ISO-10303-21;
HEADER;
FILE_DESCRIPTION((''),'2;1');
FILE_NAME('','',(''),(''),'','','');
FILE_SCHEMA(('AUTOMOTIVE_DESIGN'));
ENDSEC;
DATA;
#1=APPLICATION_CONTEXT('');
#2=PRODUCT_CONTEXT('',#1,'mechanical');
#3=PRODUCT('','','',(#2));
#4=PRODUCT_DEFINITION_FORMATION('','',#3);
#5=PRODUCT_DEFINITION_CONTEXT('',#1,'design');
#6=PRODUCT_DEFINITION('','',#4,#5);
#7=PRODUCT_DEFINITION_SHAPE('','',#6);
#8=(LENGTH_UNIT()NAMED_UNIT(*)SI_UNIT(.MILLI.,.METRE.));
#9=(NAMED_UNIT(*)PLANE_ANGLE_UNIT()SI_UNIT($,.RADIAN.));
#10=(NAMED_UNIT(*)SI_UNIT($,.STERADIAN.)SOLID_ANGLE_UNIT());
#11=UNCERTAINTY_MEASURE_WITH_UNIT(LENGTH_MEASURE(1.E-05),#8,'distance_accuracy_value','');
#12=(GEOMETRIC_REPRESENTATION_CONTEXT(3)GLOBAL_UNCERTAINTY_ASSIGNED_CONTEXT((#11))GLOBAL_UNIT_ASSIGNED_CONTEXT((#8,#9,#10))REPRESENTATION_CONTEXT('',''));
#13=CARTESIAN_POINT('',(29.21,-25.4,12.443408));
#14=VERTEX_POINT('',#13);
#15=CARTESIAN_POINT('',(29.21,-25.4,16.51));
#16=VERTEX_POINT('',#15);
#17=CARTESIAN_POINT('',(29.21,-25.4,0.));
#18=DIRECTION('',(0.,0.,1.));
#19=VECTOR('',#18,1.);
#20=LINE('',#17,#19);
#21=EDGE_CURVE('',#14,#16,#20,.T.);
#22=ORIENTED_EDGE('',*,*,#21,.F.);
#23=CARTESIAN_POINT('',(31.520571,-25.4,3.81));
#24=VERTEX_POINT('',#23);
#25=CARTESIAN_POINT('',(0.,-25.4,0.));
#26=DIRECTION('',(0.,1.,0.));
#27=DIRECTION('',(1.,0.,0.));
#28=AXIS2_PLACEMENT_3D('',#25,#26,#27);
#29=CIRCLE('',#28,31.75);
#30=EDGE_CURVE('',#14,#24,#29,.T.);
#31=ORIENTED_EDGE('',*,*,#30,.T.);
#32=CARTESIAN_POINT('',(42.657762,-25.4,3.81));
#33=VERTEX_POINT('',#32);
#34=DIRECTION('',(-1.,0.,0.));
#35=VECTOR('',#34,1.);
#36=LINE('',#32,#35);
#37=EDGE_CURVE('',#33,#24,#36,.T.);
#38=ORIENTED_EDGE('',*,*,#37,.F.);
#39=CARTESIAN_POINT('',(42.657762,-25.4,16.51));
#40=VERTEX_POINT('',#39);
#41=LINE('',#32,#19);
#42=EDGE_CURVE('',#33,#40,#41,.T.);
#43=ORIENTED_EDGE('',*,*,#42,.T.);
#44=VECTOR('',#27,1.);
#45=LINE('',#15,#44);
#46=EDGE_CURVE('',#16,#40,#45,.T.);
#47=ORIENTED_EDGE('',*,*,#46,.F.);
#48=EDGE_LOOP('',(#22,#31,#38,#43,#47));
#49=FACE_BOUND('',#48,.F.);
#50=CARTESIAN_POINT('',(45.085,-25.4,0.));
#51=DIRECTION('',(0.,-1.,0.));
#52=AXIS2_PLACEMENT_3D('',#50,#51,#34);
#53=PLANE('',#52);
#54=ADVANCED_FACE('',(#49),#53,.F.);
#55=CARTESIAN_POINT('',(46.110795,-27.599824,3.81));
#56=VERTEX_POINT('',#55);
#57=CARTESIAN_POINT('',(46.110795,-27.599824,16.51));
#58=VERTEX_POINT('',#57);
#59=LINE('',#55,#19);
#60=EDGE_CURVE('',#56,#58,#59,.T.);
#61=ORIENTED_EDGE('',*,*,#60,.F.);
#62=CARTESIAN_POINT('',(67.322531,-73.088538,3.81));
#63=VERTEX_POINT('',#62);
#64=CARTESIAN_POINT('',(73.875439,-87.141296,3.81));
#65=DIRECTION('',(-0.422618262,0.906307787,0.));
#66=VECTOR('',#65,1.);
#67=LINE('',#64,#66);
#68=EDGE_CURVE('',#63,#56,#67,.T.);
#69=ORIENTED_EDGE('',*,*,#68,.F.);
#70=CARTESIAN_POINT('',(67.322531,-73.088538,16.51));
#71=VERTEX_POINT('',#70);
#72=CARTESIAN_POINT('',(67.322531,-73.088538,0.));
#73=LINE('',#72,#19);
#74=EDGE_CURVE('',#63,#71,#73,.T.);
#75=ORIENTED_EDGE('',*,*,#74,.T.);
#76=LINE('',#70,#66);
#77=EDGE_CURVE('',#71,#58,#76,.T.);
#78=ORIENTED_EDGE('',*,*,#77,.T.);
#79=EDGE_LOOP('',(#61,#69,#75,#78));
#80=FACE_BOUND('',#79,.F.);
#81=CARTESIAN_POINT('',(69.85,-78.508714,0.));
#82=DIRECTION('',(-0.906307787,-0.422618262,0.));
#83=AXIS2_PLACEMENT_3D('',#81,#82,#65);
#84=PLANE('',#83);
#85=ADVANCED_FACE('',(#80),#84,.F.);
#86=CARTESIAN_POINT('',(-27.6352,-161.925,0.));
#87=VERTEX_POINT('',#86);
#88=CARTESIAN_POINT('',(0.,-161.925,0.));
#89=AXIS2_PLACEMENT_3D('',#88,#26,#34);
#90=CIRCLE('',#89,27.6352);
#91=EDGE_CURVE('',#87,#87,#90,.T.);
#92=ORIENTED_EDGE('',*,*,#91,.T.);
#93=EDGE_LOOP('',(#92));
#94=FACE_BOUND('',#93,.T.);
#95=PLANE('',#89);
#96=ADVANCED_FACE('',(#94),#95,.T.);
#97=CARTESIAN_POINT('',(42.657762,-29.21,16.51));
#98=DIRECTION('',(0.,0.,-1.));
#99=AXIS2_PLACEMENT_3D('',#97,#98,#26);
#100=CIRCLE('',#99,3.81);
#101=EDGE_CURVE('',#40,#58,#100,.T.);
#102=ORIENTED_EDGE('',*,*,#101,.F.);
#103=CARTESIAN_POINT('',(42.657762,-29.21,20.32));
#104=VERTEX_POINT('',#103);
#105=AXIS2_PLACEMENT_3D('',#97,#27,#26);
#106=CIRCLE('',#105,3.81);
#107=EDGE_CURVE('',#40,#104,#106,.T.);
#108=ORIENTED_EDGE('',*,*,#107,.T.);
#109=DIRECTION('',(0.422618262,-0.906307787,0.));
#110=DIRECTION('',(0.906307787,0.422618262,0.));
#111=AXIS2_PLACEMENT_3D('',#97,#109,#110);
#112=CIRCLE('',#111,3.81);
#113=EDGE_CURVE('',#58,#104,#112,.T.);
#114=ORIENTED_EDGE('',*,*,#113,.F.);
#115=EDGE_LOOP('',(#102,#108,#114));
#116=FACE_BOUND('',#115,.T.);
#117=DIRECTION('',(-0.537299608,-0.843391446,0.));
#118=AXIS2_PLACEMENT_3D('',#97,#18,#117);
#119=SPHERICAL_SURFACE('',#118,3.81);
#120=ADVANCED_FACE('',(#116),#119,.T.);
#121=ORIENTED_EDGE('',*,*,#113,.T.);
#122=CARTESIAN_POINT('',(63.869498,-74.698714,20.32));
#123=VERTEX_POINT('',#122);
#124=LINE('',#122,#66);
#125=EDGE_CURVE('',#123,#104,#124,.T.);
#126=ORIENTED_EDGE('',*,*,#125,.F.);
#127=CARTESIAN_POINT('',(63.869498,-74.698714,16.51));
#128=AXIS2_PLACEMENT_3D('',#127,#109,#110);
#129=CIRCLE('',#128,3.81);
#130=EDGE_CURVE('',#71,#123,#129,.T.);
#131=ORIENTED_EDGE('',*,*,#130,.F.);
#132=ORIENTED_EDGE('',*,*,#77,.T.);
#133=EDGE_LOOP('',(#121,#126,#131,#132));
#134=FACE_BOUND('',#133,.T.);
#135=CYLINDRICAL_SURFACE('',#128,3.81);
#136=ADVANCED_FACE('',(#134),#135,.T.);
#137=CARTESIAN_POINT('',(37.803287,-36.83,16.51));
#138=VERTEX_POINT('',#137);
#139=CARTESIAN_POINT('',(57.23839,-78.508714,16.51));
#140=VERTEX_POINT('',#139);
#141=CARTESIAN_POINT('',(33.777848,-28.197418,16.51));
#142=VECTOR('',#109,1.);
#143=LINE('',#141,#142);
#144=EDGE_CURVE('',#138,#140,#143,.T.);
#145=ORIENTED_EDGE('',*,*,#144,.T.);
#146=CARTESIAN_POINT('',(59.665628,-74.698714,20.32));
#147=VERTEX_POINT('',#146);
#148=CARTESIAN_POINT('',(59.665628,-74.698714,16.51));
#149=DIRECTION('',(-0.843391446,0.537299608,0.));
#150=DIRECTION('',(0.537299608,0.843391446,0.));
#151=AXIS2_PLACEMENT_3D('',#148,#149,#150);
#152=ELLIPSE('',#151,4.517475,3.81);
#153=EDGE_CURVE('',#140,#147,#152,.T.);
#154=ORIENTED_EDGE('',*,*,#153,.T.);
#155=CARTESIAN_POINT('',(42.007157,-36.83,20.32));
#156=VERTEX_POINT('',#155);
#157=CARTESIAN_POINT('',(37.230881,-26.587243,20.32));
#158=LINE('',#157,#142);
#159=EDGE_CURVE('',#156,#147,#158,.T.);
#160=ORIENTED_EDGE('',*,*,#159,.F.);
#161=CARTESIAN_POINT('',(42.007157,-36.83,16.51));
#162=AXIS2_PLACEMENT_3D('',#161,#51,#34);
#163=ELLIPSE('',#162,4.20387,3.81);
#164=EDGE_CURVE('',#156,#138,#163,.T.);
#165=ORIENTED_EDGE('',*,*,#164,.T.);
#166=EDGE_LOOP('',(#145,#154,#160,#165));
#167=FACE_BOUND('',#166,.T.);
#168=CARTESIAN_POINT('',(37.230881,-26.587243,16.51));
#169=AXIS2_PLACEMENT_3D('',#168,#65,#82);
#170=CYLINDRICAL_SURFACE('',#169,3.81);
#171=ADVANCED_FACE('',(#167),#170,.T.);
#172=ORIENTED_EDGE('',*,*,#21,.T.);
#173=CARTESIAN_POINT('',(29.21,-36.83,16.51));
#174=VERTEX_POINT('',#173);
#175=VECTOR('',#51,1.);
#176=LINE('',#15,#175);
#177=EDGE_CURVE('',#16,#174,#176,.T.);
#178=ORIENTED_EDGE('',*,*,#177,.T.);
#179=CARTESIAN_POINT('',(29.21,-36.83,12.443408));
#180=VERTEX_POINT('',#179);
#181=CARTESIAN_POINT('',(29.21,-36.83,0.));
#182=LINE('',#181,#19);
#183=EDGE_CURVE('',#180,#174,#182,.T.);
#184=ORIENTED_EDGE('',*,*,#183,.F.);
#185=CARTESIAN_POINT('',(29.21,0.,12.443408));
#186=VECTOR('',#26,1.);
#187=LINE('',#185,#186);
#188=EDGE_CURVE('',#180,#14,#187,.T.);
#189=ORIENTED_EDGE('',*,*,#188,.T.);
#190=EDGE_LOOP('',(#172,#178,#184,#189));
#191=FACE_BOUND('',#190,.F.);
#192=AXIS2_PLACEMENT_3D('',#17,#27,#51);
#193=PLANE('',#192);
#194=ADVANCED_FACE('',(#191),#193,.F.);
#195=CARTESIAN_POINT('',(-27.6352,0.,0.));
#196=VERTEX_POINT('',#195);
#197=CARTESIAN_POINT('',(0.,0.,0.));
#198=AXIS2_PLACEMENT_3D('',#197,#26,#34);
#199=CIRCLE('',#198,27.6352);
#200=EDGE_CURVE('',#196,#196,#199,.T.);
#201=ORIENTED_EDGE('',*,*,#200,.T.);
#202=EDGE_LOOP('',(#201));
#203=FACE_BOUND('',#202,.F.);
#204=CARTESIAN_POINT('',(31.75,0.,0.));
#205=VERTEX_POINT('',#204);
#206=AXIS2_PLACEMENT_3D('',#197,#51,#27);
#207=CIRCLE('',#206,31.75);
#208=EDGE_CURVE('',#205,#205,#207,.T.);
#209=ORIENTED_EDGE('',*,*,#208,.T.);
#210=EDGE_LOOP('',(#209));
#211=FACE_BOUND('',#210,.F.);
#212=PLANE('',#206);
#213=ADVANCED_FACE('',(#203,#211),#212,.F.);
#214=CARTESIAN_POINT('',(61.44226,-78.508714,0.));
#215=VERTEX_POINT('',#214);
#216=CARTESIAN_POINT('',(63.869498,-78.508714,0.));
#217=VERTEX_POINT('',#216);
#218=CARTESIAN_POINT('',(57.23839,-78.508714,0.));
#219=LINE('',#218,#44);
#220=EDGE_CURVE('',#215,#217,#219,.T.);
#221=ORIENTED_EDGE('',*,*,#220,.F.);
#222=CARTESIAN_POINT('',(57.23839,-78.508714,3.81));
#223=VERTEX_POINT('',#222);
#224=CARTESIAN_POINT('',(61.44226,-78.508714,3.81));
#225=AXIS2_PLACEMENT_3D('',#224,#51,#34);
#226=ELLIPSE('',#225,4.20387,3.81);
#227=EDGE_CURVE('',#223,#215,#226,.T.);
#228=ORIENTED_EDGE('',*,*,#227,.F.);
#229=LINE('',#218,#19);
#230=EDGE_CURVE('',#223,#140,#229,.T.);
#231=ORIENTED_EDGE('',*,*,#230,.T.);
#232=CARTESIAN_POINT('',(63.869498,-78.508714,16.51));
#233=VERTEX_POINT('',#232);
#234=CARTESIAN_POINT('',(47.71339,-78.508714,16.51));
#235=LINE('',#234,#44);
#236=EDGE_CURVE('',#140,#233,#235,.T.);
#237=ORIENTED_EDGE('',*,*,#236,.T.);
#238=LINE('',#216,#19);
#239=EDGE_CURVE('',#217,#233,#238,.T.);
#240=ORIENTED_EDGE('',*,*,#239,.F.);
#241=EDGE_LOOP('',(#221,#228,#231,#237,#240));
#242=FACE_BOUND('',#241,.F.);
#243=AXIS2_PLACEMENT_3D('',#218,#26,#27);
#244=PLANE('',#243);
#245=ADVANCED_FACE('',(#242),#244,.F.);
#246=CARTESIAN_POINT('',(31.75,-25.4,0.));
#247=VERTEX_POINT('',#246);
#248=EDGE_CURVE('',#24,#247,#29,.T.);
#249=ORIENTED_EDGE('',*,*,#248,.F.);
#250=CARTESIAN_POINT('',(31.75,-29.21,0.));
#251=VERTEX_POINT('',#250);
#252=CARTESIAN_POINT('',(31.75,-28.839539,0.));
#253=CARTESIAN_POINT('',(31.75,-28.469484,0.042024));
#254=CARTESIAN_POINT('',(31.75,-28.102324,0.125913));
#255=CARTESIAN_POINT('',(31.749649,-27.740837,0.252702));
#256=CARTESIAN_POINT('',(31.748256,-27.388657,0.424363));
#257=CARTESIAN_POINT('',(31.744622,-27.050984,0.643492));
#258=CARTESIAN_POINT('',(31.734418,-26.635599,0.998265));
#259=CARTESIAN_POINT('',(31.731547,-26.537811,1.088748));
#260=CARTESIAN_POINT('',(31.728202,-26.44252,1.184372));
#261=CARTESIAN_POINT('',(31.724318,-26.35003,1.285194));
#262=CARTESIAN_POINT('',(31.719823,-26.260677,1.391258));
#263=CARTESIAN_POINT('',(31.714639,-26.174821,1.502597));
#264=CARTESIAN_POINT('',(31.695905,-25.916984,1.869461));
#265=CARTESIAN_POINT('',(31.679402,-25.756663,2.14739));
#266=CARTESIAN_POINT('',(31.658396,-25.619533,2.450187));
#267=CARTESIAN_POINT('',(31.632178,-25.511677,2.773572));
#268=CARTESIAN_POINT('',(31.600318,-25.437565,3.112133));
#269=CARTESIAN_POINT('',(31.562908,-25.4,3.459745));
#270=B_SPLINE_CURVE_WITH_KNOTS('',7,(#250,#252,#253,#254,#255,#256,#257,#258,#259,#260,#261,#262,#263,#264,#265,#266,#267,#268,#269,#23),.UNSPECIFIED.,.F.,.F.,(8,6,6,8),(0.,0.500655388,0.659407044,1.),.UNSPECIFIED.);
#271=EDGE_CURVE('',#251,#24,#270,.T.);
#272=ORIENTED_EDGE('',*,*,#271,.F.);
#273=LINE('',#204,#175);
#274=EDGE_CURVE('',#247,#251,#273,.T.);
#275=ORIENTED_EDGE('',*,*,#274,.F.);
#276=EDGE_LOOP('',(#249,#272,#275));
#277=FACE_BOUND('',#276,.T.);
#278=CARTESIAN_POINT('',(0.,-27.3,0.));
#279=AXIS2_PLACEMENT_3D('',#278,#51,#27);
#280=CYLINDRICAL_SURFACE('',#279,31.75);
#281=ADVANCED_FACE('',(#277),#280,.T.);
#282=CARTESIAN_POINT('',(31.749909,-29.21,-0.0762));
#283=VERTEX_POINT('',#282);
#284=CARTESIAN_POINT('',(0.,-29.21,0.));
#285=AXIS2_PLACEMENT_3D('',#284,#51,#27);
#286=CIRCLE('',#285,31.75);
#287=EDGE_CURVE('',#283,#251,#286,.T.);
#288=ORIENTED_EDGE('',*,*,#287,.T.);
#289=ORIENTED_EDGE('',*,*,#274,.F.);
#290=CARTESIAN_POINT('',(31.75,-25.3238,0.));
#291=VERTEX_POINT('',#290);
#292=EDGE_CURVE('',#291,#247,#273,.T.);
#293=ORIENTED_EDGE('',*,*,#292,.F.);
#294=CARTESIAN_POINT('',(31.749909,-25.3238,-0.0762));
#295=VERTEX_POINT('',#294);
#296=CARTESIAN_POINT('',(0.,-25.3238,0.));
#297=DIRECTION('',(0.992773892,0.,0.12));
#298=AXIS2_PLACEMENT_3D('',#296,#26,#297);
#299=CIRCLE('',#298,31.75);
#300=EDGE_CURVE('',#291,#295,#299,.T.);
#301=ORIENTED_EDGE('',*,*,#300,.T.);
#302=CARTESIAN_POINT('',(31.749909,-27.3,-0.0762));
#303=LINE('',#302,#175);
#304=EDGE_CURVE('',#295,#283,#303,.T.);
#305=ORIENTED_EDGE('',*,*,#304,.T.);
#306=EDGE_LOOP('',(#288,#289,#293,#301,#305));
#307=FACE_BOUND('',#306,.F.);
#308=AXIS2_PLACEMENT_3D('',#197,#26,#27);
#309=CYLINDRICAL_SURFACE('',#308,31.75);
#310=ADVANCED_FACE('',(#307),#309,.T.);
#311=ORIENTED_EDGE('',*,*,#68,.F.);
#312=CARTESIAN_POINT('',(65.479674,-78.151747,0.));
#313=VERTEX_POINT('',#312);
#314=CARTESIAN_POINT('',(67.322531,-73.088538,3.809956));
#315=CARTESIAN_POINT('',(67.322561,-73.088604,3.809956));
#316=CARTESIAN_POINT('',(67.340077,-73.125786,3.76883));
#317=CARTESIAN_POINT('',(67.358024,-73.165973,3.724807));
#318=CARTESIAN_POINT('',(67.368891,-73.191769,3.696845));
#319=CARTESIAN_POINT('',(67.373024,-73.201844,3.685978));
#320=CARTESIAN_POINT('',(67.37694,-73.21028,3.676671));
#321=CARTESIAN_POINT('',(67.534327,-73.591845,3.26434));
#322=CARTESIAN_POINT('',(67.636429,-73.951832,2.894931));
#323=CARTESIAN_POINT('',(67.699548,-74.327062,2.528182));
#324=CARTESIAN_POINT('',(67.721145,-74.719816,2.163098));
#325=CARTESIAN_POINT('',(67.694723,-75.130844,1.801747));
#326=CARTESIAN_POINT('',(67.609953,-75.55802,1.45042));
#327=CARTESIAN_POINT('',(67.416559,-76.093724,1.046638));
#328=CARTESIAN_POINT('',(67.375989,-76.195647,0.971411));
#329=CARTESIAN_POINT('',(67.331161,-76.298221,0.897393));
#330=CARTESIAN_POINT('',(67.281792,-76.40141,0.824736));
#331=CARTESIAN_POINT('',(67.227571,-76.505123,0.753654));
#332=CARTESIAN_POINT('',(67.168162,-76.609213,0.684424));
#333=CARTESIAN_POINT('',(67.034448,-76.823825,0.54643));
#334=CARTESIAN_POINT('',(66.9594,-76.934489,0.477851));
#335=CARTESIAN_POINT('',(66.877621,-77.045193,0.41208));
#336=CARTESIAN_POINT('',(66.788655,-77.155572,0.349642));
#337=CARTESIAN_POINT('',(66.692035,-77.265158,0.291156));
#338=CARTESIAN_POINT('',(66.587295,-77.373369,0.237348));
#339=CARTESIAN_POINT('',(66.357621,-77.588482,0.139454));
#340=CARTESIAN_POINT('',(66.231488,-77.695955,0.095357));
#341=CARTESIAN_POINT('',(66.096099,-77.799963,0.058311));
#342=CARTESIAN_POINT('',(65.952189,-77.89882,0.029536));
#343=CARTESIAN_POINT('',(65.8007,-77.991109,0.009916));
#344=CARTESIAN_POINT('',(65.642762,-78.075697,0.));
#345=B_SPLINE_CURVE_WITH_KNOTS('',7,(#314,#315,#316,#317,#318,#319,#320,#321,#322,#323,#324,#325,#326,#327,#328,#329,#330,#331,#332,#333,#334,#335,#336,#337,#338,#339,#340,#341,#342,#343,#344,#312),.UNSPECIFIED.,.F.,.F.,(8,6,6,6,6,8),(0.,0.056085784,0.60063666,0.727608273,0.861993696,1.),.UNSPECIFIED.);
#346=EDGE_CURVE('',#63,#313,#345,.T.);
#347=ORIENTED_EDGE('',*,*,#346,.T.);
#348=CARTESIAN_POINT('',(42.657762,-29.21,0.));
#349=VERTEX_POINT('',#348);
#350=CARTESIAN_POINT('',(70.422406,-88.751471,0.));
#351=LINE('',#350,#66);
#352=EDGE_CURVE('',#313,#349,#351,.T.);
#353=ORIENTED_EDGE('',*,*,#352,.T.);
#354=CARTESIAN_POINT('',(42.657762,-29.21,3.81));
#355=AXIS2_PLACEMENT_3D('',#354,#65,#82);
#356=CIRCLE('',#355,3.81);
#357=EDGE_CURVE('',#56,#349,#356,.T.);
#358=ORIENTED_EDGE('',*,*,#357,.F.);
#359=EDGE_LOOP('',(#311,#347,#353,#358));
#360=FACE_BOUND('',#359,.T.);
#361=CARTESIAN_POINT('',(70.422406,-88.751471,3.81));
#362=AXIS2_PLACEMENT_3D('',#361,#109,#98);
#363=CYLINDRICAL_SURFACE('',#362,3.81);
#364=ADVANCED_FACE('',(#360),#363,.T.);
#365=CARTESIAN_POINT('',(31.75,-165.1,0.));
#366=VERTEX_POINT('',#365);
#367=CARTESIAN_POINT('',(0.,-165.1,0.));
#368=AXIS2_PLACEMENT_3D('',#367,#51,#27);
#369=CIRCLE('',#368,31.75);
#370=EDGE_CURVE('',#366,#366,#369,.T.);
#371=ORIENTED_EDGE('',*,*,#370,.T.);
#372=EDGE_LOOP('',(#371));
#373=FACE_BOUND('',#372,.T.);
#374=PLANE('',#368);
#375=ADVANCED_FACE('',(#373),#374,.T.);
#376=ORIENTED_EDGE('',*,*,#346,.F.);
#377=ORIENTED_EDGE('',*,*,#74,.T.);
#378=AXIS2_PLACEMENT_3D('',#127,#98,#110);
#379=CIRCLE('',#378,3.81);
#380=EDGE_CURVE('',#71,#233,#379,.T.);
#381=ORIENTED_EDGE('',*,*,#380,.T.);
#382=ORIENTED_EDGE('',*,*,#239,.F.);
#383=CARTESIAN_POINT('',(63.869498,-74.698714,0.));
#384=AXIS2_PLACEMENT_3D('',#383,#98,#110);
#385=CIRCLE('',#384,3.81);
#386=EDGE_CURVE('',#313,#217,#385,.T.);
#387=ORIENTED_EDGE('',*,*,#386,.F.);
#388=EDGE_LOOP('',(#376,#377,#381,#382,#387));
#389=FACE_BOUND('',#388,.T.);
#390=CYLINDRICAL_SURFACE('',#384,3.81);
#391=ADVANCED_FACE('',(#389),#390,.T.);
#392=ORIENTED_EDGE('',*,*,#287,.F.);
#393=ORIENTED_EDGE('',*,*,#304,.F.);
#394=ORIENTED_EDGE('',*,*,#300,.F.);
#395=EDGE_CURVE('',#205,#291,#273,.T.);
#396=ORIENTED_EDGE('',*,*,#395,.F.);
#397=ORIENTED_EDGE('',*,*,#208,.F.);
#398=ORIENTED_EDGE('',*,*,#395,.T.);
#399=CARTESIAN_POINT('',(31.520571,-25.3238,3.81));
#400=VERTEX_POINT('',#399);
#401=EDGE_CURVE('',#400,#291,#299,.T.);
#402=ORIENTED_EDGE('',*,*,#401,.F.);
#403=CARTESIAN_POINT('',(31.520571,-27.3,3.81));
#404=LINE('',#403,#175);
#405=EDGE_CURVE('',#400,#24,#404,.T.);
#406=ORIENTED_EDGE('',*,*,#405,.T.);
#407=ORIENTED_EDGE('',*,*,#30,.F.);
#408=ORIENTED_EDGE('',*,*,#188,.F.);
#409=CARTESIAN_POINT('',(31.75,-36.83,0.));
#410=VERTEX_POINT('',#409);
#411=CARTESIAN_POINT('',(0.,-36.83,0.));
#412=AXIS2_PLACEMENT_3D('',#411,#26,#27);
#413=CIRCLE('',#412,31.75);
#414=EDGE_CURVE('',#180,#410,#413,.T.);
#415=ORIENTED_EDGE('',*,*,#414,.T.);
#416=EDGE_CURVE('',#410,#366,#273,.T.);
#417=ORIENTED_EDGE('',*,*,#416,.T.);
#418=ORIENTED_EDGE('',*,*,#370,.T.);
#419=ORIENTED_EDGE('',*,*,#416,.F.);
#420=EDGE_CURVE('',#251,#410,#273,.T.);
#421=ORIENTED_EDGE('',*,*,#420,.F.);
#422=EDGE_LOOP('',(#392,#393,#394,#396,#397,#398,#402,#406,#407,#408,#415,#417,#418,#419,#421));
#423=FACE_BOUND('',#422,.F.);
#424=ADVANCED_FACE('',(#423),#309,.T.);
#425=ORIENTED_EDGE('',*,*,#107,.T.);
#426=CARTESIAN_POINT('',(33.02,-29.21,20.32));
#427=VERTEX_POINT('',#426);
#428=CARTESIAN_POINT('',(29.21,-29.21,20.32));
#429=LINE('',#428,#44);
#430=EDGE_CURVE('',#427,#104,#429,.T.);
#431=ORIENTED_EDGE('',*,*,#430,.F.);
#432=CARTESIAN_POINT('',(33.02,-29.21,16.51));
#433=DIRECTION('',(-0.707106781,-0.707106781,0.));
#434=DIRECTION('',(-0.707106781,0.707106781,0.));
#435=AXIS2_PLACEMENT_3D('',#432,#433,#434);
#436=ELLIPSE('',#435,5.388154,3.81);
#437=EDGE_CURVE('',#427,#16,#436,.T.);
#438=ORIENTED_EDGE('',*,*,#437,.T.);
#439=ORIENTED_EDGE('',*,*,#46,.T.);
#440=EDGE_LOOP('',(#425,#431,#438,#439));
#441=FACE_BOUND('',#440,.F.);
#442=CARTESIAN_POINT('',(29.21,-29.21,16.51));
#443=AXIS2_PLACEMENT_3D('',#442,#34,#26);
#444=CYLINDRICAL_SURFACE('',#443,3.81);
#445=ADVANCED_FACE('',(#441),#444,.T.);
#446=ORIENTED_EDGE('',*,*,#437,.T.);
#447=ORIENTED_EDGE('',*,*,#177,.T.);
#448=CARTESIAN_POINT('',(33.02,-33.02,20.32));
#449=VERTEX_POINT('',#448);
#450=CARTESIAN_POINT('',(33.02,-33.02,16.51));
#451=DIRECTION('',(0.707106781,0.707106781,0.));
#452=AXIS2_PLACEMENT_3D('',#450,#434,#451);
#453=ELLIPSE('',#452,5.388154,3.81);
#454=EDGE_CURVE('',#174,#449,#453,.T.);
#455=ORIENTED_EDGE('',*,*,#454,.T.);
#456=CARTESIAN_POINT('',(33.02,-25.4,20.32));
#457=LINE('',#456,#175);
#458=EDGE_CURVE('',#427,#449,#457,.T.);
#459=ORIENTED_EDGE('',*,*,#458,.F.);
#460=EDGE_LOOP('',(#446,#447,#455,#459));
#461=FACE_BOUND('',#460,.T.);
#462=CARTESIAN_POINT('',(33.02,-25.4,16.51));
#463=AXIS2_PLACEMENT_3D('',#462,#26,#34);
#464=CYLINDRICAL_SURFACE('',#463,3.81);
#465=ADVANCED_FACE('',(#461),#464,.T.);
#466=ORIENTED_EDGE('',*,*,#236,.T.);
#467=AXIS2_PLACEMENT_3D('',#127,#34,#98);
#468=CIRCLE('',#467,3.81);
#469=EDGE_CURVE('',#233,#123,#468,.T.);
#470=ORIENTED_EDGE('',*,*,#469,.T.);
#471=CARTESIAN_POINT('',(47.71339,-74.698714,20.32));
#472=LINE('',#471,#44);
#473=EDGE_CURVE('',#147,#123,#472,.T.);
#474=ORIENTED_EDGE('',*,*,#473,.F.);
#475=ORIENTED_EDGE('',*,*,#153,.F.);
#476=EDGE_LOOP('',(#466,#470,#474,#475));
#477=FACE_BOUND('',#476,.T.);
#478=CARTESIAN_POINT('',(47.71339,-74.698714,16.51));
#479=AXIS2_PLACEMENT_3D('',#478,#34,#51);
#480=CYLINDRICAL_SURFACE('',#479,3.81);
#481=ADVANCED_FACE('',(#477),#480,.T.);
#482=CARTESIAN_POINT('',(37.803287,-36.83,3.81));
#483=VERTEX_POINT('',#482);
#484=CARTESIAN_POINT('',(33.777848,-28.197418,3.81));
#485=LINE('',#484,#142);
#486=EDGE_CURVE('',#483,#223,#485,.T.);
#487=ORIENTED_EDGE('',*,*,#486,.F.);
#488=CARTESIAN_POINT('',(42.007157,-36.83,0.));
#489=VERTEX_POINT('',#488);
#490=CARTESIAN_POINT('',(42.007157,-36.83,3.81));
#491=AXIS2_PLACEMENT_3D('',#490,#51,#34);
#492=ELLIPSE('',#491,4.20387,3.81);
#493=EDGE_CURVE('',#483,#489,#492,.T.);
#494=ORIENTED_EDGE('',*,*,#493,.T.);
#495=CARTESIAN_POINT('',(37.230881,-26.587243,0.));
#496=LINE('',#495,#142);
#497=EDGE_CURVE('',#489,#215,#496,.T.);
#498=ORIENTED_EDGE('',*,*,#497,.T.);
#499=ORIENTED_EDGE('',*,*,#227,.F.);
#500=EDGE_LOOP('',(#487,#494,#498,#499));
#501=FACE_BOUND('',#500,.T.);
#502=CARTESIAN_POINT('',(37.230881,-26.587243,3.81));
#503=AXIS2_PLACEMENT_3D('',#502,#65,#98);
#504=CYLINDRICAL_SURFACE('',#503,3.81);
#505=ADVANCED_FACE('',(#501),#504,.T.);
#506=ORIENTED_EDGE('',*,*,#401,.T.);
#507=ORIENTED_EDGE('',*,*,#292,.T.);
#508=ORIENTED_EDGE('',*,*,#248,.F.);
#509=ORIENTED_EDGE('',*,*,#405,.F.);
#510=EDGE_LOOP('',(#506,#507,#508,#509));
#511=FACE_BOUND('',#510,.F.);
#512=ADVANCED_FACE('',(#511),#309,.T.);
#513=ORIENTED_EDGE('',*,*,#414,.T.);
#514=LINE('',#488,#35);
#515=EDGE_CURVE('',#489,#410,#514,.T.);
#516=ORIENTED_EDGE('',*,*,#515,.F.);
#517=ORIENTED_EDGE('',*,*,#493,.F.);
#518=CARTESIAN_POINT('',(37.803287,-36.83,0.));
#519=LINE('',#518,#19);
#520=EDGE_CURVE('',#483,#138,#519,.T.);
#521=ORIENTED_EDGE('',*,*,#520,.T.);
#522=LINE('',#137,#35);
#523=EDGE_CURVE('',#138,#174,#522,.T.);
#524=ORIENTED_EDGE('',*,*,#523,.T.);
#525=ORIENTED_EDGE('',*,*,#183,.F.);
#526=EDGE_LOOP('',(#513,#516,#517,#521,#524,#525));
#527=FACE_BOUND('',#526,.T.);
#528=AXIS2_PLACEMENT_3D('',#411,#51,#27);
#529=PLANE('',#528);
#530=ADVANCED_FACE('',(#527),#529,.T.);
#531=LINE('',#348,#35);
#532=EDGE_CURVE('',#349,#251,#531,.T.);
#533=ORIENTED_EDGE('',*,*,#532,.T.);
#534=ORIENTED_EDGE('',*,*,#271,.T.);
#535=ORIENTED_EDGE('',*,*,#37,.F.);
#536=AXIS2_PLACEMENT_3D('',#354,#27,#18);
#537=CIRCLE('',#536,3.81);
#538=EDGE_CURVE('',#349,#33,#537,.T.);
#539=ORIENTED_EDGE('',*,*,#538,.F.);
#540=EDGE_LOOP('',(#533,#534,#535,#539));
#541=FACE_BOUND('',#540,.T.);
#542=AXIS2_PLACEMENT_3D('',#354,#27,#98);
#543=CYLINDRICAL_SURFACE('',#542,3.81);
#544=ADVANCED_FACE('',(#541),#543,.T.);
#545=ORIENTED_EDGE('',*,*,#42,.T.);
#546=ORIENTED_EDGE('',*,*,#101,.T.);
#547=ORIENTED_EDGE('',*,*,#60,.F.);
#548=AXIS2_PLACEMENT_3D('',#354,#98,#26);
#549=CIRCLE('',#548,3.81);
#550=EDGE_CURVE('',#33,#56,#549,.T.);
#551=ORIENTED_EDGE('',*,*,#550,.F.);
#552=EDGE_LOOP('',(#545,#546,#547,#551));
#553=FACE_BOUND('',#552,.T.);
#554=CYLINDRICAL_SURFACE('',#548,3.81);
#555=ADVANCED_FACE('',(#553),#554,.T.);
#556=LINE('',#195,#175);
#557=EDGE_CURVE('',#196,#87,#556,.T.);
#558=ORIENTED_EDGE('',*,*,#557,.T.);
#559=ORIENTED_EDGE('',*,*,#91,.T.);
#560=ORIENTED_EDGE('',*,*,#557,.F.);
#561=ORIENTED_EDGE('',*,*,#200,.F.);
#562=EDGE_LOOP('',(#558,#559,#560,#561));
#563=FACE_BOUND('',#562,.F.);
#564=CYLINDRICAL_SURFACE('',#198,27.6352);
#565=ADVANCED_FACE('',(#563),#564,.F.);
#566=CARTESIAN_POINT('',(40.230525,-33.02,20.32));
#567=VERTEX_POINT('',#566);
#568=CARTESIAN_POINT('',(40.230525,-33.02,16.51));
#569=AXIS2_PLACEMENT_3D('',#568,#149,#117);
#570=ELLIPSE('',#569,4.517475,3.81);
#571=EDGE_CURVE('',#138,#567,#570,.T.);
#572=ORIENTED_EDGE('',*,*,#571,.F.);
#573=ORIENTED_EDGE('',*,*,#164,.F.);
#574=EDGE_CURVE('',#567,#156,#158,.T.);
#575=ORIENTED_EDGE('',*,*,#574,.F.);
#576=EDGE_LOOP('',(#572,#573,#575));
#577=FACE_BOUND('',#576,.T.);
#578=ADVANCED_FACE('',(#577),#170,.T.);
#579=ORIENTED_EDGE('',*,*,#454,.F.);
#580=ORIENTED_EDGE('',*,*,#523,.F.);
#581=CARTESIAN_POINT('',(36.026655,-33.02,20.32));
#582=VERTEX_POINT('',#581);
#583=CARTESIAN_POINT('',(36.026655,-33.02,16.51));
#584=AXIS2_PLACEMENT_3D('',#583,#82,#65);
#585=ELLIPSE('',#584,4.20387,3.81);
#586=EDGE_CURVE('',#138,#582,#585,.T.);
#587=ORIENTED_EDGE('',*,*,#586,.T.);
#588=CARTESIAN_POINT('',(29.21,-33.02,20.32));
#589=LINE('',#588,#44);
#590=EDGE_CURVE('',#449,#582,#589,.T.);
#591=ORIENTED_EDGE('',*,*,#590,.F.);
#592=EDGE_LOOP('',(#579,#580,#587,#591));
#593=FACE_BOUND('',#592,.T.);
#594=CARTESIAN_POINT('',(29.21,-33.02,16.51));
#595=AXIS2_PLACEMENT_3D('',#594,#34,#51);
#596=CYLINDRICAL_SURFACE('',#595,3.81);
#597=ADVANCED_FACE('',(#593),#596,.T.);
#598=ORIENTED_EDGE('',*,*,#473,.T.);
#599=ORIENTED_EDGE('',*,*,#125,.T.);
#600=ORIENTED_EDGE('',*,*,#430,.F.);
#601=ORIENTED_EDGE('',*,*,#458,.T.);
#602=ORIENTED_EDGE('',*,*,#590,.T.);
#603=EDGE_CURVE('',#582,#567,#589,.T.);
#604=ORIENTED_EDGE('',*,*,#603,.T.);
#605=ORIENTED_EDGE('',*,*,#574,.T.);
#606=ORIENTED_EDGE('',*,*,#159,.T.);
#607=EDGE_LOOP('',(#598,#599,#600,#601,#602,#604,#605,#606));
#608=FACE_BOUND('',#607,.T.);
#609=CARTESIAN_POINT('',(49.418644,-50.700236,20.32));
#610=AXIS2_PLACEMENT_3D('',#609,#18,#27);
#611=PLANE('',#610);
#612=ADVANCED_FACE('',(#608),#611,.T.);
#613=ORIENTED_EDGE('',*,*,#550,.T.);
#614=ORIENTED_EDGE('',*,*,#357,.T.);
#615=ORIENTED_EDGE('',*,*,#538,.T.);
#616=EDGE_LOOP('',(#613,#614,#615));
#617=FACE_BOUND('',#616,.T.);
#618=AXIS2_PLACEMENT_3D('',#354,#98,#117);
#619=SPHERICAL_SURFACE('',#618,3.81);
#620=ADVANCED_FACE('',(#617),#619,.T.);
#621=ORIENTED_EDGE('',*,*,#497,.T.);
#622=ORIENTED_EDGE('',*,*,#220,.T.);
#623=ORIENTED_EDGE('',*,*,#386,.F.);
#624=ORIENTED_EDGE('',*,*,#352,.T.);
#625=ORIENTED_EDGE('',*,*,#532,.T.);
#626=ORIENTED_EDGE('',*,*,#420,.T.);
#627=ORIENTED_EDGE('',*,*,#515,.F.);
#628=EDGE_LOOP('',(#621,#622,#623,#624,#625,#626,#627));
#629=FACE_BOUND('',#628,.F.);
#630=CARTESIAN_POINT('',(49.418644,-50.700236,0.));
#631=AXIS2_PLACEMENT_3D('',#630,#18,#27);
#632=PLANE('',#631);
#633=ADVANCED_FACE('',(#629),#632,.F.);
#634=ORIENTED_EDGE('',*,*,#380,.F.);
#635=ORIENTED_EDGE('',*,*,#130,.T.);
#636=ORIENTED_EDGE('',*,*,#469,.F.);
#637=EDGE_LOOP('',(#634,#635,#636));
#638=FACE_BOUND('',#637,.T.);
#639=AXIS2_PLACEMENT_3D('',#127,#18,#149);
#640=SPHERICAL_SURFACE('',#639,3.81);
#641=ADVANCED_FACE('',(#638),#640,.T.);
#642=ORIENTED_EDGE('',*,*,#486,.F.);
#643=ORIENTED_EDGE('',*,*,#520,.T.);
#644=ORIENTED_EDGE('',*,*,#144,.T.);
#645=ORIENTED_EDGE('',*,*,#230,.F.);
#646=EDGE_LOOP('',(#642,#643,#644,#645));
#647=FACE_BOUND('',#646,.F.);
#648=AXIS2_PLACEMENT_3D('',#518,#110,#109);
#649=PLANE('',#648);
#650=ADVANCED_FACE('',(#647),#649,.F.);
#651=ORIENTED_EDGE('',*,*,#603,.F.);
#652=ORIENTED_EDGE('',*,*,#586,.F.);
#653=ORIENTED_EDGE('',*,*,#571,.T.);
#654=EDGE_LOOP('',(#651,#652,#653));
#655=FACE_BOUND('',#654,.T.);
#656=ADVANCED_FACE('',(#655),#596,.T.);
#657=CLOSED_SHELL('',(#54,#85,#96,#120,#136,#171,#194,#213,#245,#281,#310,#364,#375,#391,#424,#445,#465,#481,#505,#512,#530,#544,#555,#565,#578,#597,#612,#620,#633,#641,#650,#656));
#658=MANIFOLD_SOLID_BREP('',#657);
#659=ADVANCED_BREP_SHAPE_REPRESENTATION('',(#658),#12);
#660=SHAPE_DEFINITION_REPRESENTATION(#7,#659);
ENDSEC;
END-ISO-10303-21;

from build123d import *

# Parameters (mm, degrees)
F0_R          = 31.75
F0_R_2        = 28.575
F1_DEPTH      = 165.1
F3_DEPTH      = 20.32
F4_T1_DEPTH   = 16.51
F4_T3_DEPTH   = 12.7
F4_T5_DEPTH   = 50.1912424643
F4_T7_DEPTH   = 13.4477623063
F4_T9_DEPTH   = 11.43
F4_T14_DEPTH  = 3.8862
F4_T20_DEPTH  = 3.8862
F4_T26_DEPTH  = 3.8862
F4_T32_DEPTH  = 65.6967445131
F4_T37_DEPTH  = 18.118286919
F4_T42_DEPTH  = 65.037372593
F4_T48_DEPTH  = 16.1561075649
F4_T53_DEPTH  = 65.037372593
F4_T59_DEPTH  = 20.4327623063
F4_S60_R      = 31.75
F4_T61_DEPTH  = 12
F4_T66_DEPTH  = 65.6967445131
F4_T70_DEPTH  = 31.461255122
F4_T77_DEPTH  = 20.955
F4_T81_DEPTH  = 22.9727623063
F4_T88_DEPTH  = 27.643286919
F4_T92_DEPTH  = 20.955
F4_T99_DEPTH  = 18.118286919
F4_T103_DEPTH = 65.037372593
F4_T110_DEPTH = 16.1561075649
F4_T114_DEPTH = 65.037372593
F5_R          = 27.6352
F6_DEPTH      = 161.925


# Not quite as in the source:
# - a fillet or chamfer that OpenCascade refuses, or shapes differently, is made with other operations: its cross-section is extruded or revolved along the edge and cut away or added


with BuildPart() as f1:
    # F0 (on Front) → F1 (new body)
    with BuildSketch(Plane.XZ):
        Circle(F0_R)
        Circle(F0_R_2, mode=Mode.SUBTRACT)
        Circle(F0_R_2)
    extrude(amount=F1_DEPTH)

    # F2 (on Top) → F3 (join)
    with BuildSketch(Plane.XY):
        Polygon((45.085, -25.4), (29.21, -25.4), (29.21, -36.83), (37.803286919, -36.83), (57.2383903863, -78.5087138864), (69.85, -78.5087138864), align=None)
    extrude(amount=F3_DEPTH)

    # F4: fillet of radius 3.81 on 11 edges, made by hand

    # F4_s2 → F4_t1 (cut)
    with BuildSketch(Plane.XY):
        with BuildLine():
            ThreePointArc((67.3225306198, -73.0885383092), (67.0828193597, -76.7458253942), (63.8694979512, -78.5087138864))
            Line((63.8694979512, -78.5087138864), (63.8694979512, -78.5849138864))
            Line((63.8694979512, -78.5849138864), (69.969610041, -78.5849138864))
            Line((69.969610041, -78.5849138864), (67.3915912732, -73.0563347976))
            Line((67.3915912732, -73.0563347976), (67.3225306198, -73.0885383092))
        make_face()
    extrude(amount=F4_T1_DEPTH, mode=Mode.SUBTRACT)

    # F4_s4 → F4_t3 (cut)
    with BuildSketch(Plane.XY.offset(3.81)):
        with BuildLine():
            ThreePointArc((42.6577623063, -25.4), (44.7048738141, -25.9966785915), (46.1107949749, -27.5998244228))
            Line((46.1107949749, -27.5998244228), (46.1798556283, -27.5676209112))
            Line((46.1798556283, -27.5676209112), (45.1335447539, -25.3238))
            Line((45.1335447539, -25.3238), (42.6577623063, -25.3238))
            Line((42.6577623063, -25.3238), (42.6577623063, -25.4))
        make_face()
    extrude(amount=F4_T3_DEPTH, mode=Mode.SUBTRACT)

    # F4_s6 → F4_t5 (cut)
    with BuildSketch(Plane(origin=(40.018755356, -85.8204978112, 0), x_dir=(0, 0, 1), z_dir=(-0.4226182617, 0.906307787, 0))):
        with BuildLine():
            ThreePointArc((16.51, 30.1263827303), (19.2040768363, 29.0104595667), (20.32, 26.3163827303))
            Line((20.32, 26.3163827303), (20.3962, 26.3163827303))
            Line((20.3962, 26.3163827303), (20.3962, 30.2025827303))
            Line((20.3962, 30.2025827303), (16.51, 30.2025827303))
            Line((16.51, 30.2025827303), (16.51, 30.1263827303))
        make_face()
    extrude(amount=F4_T5_DEPTH, mode=Mode.SUBTRACT)

    # F4_s8 → F4_t7 (cut)
    with BuildSketch(Plane.YZ.offset(29.21)):
        with BuildLine():
            ThreePointArc((-25.4, 16.51), (-26.5159231637, 19.2040768363), (-29.21, 20.32))
            Line((-29.21, 20.32), (-29.21, 20.3962))
            Line((-29.21, 20.3962), (-25.3238, 20.3962))
            Line((-25.3238, 20.3962), (-25.3238, 16.51))
            Line((-25.3238, 16.51), (-25.4, 16.51))
        make_face()
    extrude(amount=F4_T7_DEPTH, mode=Mode.SUBTRACT)

    # F4_s10 → F4_t9 (cut)
    with BuildSketch(Plane.XZ.offset(25.4)):
        with BuildLine():
            ThreePointArc((29.21, 16.51), (30.3259231637, 19.2040768363), (33.02, 20.32))
            Line((33.02, 20.32), (33.02, 20.3962))
            Line((33.02, 20.3962), (29.1338, 20.3962))
            Line((29.1338, 20.3962), (29.1338, 16.51))
            Line((29.1338, 16.51), (29.21, 16.51))
        make_face()
    extrude(amount=F4_T9_DEPTH, mode=Mode.SUBTRACT)


with BuildPart() as f4_tool12:
    # F4_s13 → F4_t14 (new body)
    with BuildSketch(Plane.XY.offset(16.51)):
        Polygon((63.8694979512, -74.6987138864), (67.3915912732, -73.0563347976), (69.969610041, -78.5849138864), (63.8694979512, -78.5849138864), align=None)
    extrude(amount=F4_T14_DEPTH)

    # F4_s15 → F4_t16 (revolve, cut)
    with BuildSketch(Plane(origin=(63.8694979512, -74.6987138864, 16.51), x_dir=(-0.8433914458, 0.5372996083, 0), z_dir=(0.5372996083, 0.8433914458, 0))):
        with BuildLine():
            ThreePointArc((0, -3.81), (3.81, 0), (0, 3.81))
            Line((0, 3.81), (0, -3.81))
        make_face()
    revolve(axis=Axis((63.8694979512, -74.6987138864, 16.51), (0, 0, 1)), mode=Mode.SUBTRACT)


with BuildPart() as f1_1:
    add(f1.part)

    # F4_t11: cut F4_tool12
    add(f4_tool12.part, mode=Mode.SUBTRACT)


with BuildPart() as f4_tool18:
    # F4_s19 → F4_t20 (new body)
    with BuildSketch(Plane.XY.offset(3.81)):
        Polygon((42.6577623063, -29.21), (42.6577623063, -25.3238), (45.1335447539, -25.3238), (46.1798556283, -27.5676209112), align=None)
    extrude(amount=-F4_T20_DEPTH)

    # F4_s21 → F4_t22 (revolve, cut)
    with BuildSketch(Plane(origin=(42.6577623063, -29.21, 3.81), x_dir=(-0.5372996083, -0.8433914458, 0), z_dir=(0.8433914458, -0.5372996083, 0))):
        with BuildLine():
            ThreePointArc((0, -3.81), (3.81, 0), (0, 3.81))
            Line((0, 3.81), (0, -3.81))
        make_face()
    revolve(axis=Axis((42.6577623063, -29.21, 3.81), (0, 0, -1)), mode=Mode.SUBTRACT)


with BuildPart() as f1_2:
    add(f1_1.part)

    # F4_t17: cut F4_tool18
    add(f4_tool18.part, mode=Mode.SUBTRACT)


with BuildPart() as f4_tool24:
    # F4_s25 → F4_t26 (new body)
    with BuildSketch(Plane.XY.offset(16.51)):
        Polygon((42.6577623063, -29.21), (42.6577623063, -25.3238), (45.1335447539, -25.3238), (46.1798556283, -27.5676209112), align=None)
    extrude(amount=F4_T26_DEPTH)

    # F4_s27 → F4_t28 (revolve, cut)
    with BuildSketch(Plane(origin=(42.6577623063, -29.21, 16.51), x_dir=(-0.5372996083, -0.8433914458, 0), z_dir=(-0.8433914458, 0.5372996083, 0))):
        with BuildLine():
            ThreePointArc((0, -3.81), (3.81, 0), (0, 3.81))
            Line((0, 3.81), (0, -3.81))
        make_face()
    revolve(axis=Axis((42.6577623063, -29.21, 16.51), (0, 0, 1)), mode=Mode.SUBTRACT)


with BuildPart() as f1_3:
    add(f1_2.part)

    # F4_t23: cut F4_tool24
    add(f4_tool24.part, mode=Mode.SUBTRACT)


with BuildPart() as f4_tool30:
    # F4_s31 → F4_t32 (new body)
    with BuildSketch(Plane(origin=(46.5716636793, -99.87325506, 0), x_dir=(0, 0, 1), z_dir=(-0.4226182617, 0.906307787, 0))):
        with BuildLine():
            ThreePointArc((0, 26.3163827303), (1.1159231637, 29.0104595667), (3.81, 30.1263827303))
            Line((3.81, 30.1263827303), (3.81, 30.2025827303))
            Line((3.81, 30.2025827303), (-0.0762, 30.2025827303))
            Line((-0.0762, 30.2025827303), (-0.0762, 26.3163827303))
            Line((-0.0762, 26.3163827303), (0, 26.3163827303))
        make_face()
    extrude(amount=F4_T32_DEPTH)

    split(bisect_by=Plane.XZ.offset(78.5087138864), keep=Keep.BOTTOM)


with BuildPart() as f1_4:
    add(f1_3.part)

    # F4_t29: cut F4_tool30
    add(f4_tool30.part, mode=Mode.SUBTRACT)


with BuildPart() as f4_tool35:
    # F4_s36 → F4_t37 (new body)
    with BuildSketch(Plane.YZ.offset(29.21)):
        with BuildLine():
            ThreePointArc((-36.83, 16.51), (-35.7140768363, 19.2040768363), (-33.02, 20.32))
            Line((-33.02, 20.32), (-33.02, 20.3962))
            Line((-33.02, 20.3962), (-36.9062, 20.3962))
            Line((-36.9062, 20.3962), (-36.9062, 16.51))
            Line((-36.9062, 16.51), (-36.83, 16.51))
        make_face()
    extrude(amount=F4_T37_DEPTH)

    split(bisect_by=Plane(origin=(16.9446772579, 7.9014327703, 0), x_dir=(0, 0, 1), z_dir=(-0.906307787, -0.4226182617, 0)), keep=Keep.TOP)


with BuildPart() as f1_5:
    add(f1_4.part)

    # F4_t34: cut F4_tool35
    add(f4_tool35.part, mode=Mode.SUBTRACT)


with BuildPart() as f4_tool40:
    # F4_s41 → F4_t42 (new body)
    with BuildSketch(Plane(origin=(16.833170718, -36.0988510988, 0), x_dir=(0, 0, 1), z_dir=(0.4226182617, -0.906307787, 0))):
        with BuildLine():
            ThreePointArc((16.51, -18.6963827303), (19.2040768363, -19.812305894), (20.32, -22.5063827303))
            Line((20.32, -22.5063827303), (20.3962, -22.5063827303))
            Line((20.3962, -22.5063827303), (20.3962, -18.6201827303))
            Line((20.3962, -18.6201827303), (16.51, -18.6201827303))
            Line((16.51, -18.6201827303), (16.51, -18.6963827303))
        make_face()
    extrude(amount=F4_T42_DEPTH)

    split(bisect_by=Plane.XZ.offset(36.83), keep=Keep.TOP)

    split(bisect_by=Plane.XZ.offset(78.5087138864), keep=Keep.BOTTOM)


with BuildPart() as f1_6:
    add(f1_5.part)

    # F4_t39: cut F4_tool40
    add(f4_tool40.part, mode=Mode.SUBTRACT)


with BuildPart() as f4_tool46:
    # F4_s47 → F4_t48 (new body)
    with BuildSketch(Plane.YZ.offset(47.7133903863)):
        with BuildLine():
            ThreePointArc((-78.5087138864, 16.51), (-77.3927907227, 19.2040768363), (-74.6987138864, 20.32))
            Line((-74.6987138864, 20.32), (-74.6987138864, 20.3962))
            Line((-74.6987138864, 20.3962), (-78.5849138864, 20.3962))
            Line((-78.5849138864, 20.3962), (-78.5849138864, 16.51))
            Line((-78.5849138864, 16.51), (-78.5087138864, 16.51))
        make_face()
    extrude(amount=F4_T48_DEPTH)

    split(bisect_by=Plane(origin=(16.9446772579, 7.9014327703, 0), x_dir=(0, 0, 1), z_dir=(0.906307787, 0.4226182617, 0)), keep=Keep.TOP)


with BuildPart() as f1_7:
    add(f1_6.part)

    # F4_t45: cut F4_tool46
    add(f4_tool46.part, mode=Mode.SUBTRACT)


with BuildPart() as f4_tool51:
    # F4_s52 → F4_t53 (new body)
    with BuildSketch(Plane(origin=(16.833170718, -36.0988510988, 0), x_dir=(0, 0, 1), z_dir=(0.4226182617, -0.906307787, 0))):
        with BuildLine():
            ThreePointArc((0, -22.5063827303), (1.1159231637, -19.812305894), (3.81, -18.6963827303))
            Line((3.81, -18.6963827303), (3.81, -18.6201827303))
            Line((3.81, -18.6201827303), (-0.0762, -18.6201827303))
            Line((-0.0762, -18.6201827303), (-0.0762, -22.5063827303))
            Line((-0.0762, -22.5063827303), (0, -22.5063827303))
        make_face()
    extrude(amount=F4_T53_DEPTH)

    split(bisect_by=Plane.XZ.offset(78.5087138864), keep=Keep.BOTTOM)

    split(bisect_by=Plane.XZ.offset(36.83), keep=Keep.TOP)


with BuildPart() as f1_8:
    add(f1_7.part)

    # F4_t50: cut F4_tool51
    add(f4_tool51.part, mode=Mode.SUBTRACT)


with BuildPart() as f4_tool57:
    # F4_s58 → F4_t59 (new body)
    with BuildSketch(Plane.YZ.offset(42.6577623063)):
        with BuildLine():
            ThreePointArc((-29.21, 0), (-26.5159231637, 1.1159231637), (-25.4, 3.81))
            Line((-25.4, 3.81), (-25.3238, 3.81))
            Line((-25.3238, 3.81), (-25.3238, -0.0762))
            Line((-25.3238, -0.0762), (-29.21, -0.0762))
            Line((-29.21, -0.0762), (-29.21, 0))
        make_face()
    extrude(amount=-F4_T59_DEPTH)

    # F4_s60 → F4_t61 (cut, symmetric)
    with BuildSketch(Plane.XZ.offset(27.3)):
        Circle(F4_S60_R)
    extrude(amount=F4_T61_DEPTH, both=True, mode=Mode.SUBTRACT)


with BuildPart() as f1_9:
    add(f1_8.part)

    # F4_t56: cut F4_tool57
    add(f4_tool57.part, mode=Mode.SUBTRACT)


with BuildPart() as f4_tool64:
    # F4_s65 → F4_t66 (new body)
    with BuildSketch(Plane(origin=(46.5716636793, -99.87325506, 0), x_dir=(0, 0, 1), z_dir=(-0.4226182617, 0.906307787, 0))):
        with BuildLine():
            ThreePointArc((0, 26.3163827303), (1.1159231637, 29.0104595667), (3.81, 30.1263827303))
            Line((3.81, 30.1263827303), (3.81, 30.2025827303))
            Line((3.81, 30.2025827303), (-0.0762, 30.2025827303))
            Line((-0.0762, 30.2025827303), (-0.0762, 26.3163827303))
            Line((-0.0762, 26.3163827303), (0, 26.3163827303))
        make_face()
    extrude(amount=F4_T66_DEPTH)

    split(bisect_by=Plane.XZ.offset(78.5087138864), keep=Keep.TOP)


with BuildPart() as f4_tool68:
    # F4_s69 → F4_t70 (new body)
    with BuildSketch(Plane.XY.offset(-14.951255122)):
        with BuildLine():
            ThreePointArc((67.3225306198, -73.0885383092), (67.0828193597, -76.7458253942), (63.8694979512, -78.5087138864))
            Line((63.8694979512, -78.5087138864), (63.8694979512, -78.5849138864))
            Line((63.8694979512, -78.5849138864), (69.969610041, -78.5849138864))
            Line((69.969610041, -78.5849138864), (67.3915912732, -73.0563347976))
            Line((67.3915912732, -73.0563347976), (67.3225306198, -73.0885383092))
        make_face()
    extrude(amount=F4_T70_DEPTH)

    split(bisect_by=Plane.XY, keep=Keep.BOTTOM)


with BuildPart() as f4_tool64_1:
    add(f4_tool64.part)

    # F4_t72: intersect F4_tool68
    add(f4_tool68.part, mode=Mode.INTERSECT)


with BuildPart() as f1_10:
    add(f1_9.part)

    # F4_t62: cut F4_tool64
    add(f4_tool64_1.part, mode=Mode.SUBTRACT)


with BuildPart() as f4_tool75:
    # F4_s76 → F4_t77 (new body)
    with BuildSketch(Plane.XZ.offset(15.875)):
        with BuildLine():
            ThreePointArc((29.21, 16.51), (30.3259231637, 19.2040768363), (33.02, 20.32))
            Line((33.02, 20.32), (33.02, 20.3962))
            Line((33.02, 20.3962), (29.1338, 20.3962))
            Line((29.1338, 20.3962), (29.1338, 16.51))
            Line((29.1338, 16.51), (29.21, 16.51))
        make_face()
    extrude(amount=F4_T77_DEPTH)

    split(bisect_by=Plane.XZ.offset(25.4), keep=Keep.BOTTOM)


with BuildPart() as f4_tool79:
    # F4_s80 → F4_t81 (new body)
    with BuildSketch(Plane.YZ.offset(42.6577623063)):
        with BuildLine():
            ThreePointArc((-25.4, 16.51), (-26.5159231637, 19.2040768363), (-29.21, 20.32))
            Line((-29.21, 20.32), (-29.21, 20.3962))
            Line((-29.21, 20.3962), (-25.3238, 20.3962))
            Line((-25.3238, 20.3962), (-25.3238, 16.51))
            Line((-25.3238, 16.51), (-25.4, 16.51))
        make_face()
    extrude(amount=-F4_T81_DEPTH)

    split(bisect_by=Plane.YZ.offset(29.21), keep=Keep.BOTTOM)


with BuildPart() as f4_tool75_1:
    add(f4_tool75.part)

    # F4_t83: intersect F4_tool79
    add(f4_tool79.part, mode=Mode.INTERSECT)


with BuildPart() as f1_11:
    add(f1_10.part)

    # F4_t73: cut F4_tool75
    add(f4_tool75_1.part, mode=Mode.SUBTRACT)


with BuildPart() as f4_tool86:
    # F4_s87 → F4_t88 (new body)
    with BuildSketch(Plane.YZ.offset(19.685)):
        with BuildLine():
            ThreePointArc((-36.83, 16.51), (-35.7140768363, 19.2040768363), (-33.02, 20.32))
            Line((-33.02, 20.32), (-33.02, 20.3962))
            Line((-33.02, 20.3962), (-36.9062, 20.3962))
            Line((-36.9062, 20.3962), (-36.9062, 16.51))
            Line((-36.9062, 16.51), (-36.83, 16.51))
        make_face()
    extrude(amount=F4_T88_DEPTH)

    split(bisect_by=Plane.YZ.offset(29.21), keep=Keep.BOTTOM)


with BuildPart() as f4_tool90:
    # F4_s91 → F4_t92 (new body)
    with BuildSketch(Plane.XZ.offset(25.4)):
        with BuildLine():
            ThreePointArc((29.21, 16.51), (30.3259231637, 19.2040768363), (33.02, 20.32))
            Line((33.02, 20.32), (33.02, 20.3962))
            Line((33.02, 20.3962), (29.1338, 20.3962))
            Line((29.1338, 20.3962), (29.1338, 16.51))
            Line((29.1338, 16.51), (29.21, 16.51))
        make_face()
    extrude(amount=F4_T92_DEPTH)

    split(bisect_by=Plane.XZ.offset(36.83), keep=Keep.TOP)


with BuildPart() as f4_tool86_1:
    add(f4_tool86.part)

    # F4_t94: intersect F4_tool90
    add(f4_tool90.part, mode=Mode.INTERSECT)


with BuildPart() as f1_12:
    add(f1_11.part)

    # F4_t84: cut F4_tool86
    add(f4_tool86_1.part, mode=Mode.SUBTRACT)


with BuildPart() as f4_tool97:
    # F4_s98 → F4_t99 (new body)
    with BuildSketch(Plane.YZ.offset(29.21)):
        with BuildLine():
            ThreePointArc((-36.83, 16.51), (-35.7140768363, 19.2040768363), (-33.02, 20.32))
            Line((-33.02, 20.32), (-33.02, 20.3962))
            Line((-33.02, 20.3962), (-36.9062, 20.3962))
            Line((-36.9062, 20.3962), (-36.9062, 16.51))
            Line((-36.9062, 16.51), (-36.83, 16.51))
        make_face()
    extrude(amount=F4_T99_DEPTH)

    split(bisect_by=Plane(origin=(16.9446772579, 7.9014327703, 0), x_dir=(0, 0, 1), z_dir=(0.906307787, 0.4226182617, 0)), keep=Keep.TOP)


with BuildPart() as f4_tool101:
    # F4_s102 → F4_t103 (new body)
    with BuildSketch(Plane(origin=(16.833170718, -36.0988510988, 0), x_dir=(0, 0, 1), z_dir=(0.4226182617, -0.906307787, 0))):
        with BuildLine():
            ThreePointArc((16.51, -18.6963827303), (19.2040768363, -19.812305894), (20.32, -22.5063827303))
            Line((20.32, -22.5063827303), (20.3962, -22.5063827303))
            Line((20.3962, -22.5063827303), (20.3962, -18.6201827303))
            Line((20.3962, -18.6201827303), (16.51, -18.6201827303))
            Line((16.51, -18.6201827303), (16.51, -18.6963827303))
        make_face()
    extrude(amount=F4_T103_DEPTH)

    split(bisect_by=Plane.XZ.offset(36.83), keep=Keep.BOTTOM)


with BuildPart() as f4_tool97_1:
    add(f4_tool97.part)

    # F4_t105: intersect F4_tool101
    add(f4_tool101.part, mode=Mode.INTERSECT)


with BuildPart() as f1_13:
    add(f1_12.part)

    # F4_t95: cut F4_tool97
    add(f4_tool97_1.part, mode=Mode.SUBTRACT)


with BuildPart() as f4_tool108:
    # F4_s109 → F4_t110 (new body)
    with BuildSketch(Plane.YZ.offset(47.7133903863)):
        with BuildLine():
            ThreePointArc((-78.5087138864, 16.51), (-77.3927907227, 19.2040768363), (-74.6987138864, 20.32))
            Line((-74.6987138864, 20.32), (-74.6987138864, 20.3962))
            Line((-74.6987138864, 20.3962), (-78.5849138864, 20.3962))
            Line((-78.5849138864, 20.3962), (-78.5849138864, 16.51))
            Line((-78.5849138864, 16.51), (-78.5087138864, 16.51))
        make_face()
    extrude(amount=F4_T110_DEPTH)

    split(bisect_by=Plane(origin=(16.9446772579, 7.9014327703, 0), x_dir=(0, 0, 1), z_dir=(-0.906307787, -0.4226182617, 0)), keep=Keep.TOP)


with BuildPart() as f4_tool112:
    # F4_s113 → F4_t114 (new body)
    with BuildSketch(Plane(origin=(16.833170718, -36.0988510988, 0), x_dir=(0, 0, 1), z_dir=(0.4226182617, -0.906307787, 0))):
        with BuildLine():
            ThreePointArc((16.51, -18.6963827303), (19.2040768363, -19.812305894), (20.32, -22.5063827303))
            Line((20.32, -22.5063827303), (20.3962, -22.5063827303))
            Line((20.3962, -22.5063827303), (20.3962, -18.6201827303))
            Line((20.3962, -18.6201827303), (16.51, -18.6201827303))
            Line((16.51, -18.6201827303), (16.51, -18.6963827303))
        make_face()
    extrude(amount=F4_T114_DEPTH)

    split(bisect_by=Plane.XZ.offset(78.5087138864), keep=Keep.TOP)


with BuildPart() as f4_tool108_1:
    add(f4_tool108.part)

    # F4_t116: intersect F4_tool112
    add(f4_tool112.part, mode=Mode.INTERSECT)


with BuildPart() as f1_14:
    add(f1_13.part)

    # F4_t106: cut F4_tool108
    add(f4_tool108_1.part, mode=Mode.SUBTRACT)

    # F5 (on face) → F6 (cut)
    with BuildSketch(Plane(origin=(0, 0, 0), x_dir=(-1, 0, 0), z_dir=(0, 1, 0))):
        Circle(F5_R)
    extrude(amount=-F6_DEPTH, mode=Mode.SUBTRACT)


solid = f1_14.part
